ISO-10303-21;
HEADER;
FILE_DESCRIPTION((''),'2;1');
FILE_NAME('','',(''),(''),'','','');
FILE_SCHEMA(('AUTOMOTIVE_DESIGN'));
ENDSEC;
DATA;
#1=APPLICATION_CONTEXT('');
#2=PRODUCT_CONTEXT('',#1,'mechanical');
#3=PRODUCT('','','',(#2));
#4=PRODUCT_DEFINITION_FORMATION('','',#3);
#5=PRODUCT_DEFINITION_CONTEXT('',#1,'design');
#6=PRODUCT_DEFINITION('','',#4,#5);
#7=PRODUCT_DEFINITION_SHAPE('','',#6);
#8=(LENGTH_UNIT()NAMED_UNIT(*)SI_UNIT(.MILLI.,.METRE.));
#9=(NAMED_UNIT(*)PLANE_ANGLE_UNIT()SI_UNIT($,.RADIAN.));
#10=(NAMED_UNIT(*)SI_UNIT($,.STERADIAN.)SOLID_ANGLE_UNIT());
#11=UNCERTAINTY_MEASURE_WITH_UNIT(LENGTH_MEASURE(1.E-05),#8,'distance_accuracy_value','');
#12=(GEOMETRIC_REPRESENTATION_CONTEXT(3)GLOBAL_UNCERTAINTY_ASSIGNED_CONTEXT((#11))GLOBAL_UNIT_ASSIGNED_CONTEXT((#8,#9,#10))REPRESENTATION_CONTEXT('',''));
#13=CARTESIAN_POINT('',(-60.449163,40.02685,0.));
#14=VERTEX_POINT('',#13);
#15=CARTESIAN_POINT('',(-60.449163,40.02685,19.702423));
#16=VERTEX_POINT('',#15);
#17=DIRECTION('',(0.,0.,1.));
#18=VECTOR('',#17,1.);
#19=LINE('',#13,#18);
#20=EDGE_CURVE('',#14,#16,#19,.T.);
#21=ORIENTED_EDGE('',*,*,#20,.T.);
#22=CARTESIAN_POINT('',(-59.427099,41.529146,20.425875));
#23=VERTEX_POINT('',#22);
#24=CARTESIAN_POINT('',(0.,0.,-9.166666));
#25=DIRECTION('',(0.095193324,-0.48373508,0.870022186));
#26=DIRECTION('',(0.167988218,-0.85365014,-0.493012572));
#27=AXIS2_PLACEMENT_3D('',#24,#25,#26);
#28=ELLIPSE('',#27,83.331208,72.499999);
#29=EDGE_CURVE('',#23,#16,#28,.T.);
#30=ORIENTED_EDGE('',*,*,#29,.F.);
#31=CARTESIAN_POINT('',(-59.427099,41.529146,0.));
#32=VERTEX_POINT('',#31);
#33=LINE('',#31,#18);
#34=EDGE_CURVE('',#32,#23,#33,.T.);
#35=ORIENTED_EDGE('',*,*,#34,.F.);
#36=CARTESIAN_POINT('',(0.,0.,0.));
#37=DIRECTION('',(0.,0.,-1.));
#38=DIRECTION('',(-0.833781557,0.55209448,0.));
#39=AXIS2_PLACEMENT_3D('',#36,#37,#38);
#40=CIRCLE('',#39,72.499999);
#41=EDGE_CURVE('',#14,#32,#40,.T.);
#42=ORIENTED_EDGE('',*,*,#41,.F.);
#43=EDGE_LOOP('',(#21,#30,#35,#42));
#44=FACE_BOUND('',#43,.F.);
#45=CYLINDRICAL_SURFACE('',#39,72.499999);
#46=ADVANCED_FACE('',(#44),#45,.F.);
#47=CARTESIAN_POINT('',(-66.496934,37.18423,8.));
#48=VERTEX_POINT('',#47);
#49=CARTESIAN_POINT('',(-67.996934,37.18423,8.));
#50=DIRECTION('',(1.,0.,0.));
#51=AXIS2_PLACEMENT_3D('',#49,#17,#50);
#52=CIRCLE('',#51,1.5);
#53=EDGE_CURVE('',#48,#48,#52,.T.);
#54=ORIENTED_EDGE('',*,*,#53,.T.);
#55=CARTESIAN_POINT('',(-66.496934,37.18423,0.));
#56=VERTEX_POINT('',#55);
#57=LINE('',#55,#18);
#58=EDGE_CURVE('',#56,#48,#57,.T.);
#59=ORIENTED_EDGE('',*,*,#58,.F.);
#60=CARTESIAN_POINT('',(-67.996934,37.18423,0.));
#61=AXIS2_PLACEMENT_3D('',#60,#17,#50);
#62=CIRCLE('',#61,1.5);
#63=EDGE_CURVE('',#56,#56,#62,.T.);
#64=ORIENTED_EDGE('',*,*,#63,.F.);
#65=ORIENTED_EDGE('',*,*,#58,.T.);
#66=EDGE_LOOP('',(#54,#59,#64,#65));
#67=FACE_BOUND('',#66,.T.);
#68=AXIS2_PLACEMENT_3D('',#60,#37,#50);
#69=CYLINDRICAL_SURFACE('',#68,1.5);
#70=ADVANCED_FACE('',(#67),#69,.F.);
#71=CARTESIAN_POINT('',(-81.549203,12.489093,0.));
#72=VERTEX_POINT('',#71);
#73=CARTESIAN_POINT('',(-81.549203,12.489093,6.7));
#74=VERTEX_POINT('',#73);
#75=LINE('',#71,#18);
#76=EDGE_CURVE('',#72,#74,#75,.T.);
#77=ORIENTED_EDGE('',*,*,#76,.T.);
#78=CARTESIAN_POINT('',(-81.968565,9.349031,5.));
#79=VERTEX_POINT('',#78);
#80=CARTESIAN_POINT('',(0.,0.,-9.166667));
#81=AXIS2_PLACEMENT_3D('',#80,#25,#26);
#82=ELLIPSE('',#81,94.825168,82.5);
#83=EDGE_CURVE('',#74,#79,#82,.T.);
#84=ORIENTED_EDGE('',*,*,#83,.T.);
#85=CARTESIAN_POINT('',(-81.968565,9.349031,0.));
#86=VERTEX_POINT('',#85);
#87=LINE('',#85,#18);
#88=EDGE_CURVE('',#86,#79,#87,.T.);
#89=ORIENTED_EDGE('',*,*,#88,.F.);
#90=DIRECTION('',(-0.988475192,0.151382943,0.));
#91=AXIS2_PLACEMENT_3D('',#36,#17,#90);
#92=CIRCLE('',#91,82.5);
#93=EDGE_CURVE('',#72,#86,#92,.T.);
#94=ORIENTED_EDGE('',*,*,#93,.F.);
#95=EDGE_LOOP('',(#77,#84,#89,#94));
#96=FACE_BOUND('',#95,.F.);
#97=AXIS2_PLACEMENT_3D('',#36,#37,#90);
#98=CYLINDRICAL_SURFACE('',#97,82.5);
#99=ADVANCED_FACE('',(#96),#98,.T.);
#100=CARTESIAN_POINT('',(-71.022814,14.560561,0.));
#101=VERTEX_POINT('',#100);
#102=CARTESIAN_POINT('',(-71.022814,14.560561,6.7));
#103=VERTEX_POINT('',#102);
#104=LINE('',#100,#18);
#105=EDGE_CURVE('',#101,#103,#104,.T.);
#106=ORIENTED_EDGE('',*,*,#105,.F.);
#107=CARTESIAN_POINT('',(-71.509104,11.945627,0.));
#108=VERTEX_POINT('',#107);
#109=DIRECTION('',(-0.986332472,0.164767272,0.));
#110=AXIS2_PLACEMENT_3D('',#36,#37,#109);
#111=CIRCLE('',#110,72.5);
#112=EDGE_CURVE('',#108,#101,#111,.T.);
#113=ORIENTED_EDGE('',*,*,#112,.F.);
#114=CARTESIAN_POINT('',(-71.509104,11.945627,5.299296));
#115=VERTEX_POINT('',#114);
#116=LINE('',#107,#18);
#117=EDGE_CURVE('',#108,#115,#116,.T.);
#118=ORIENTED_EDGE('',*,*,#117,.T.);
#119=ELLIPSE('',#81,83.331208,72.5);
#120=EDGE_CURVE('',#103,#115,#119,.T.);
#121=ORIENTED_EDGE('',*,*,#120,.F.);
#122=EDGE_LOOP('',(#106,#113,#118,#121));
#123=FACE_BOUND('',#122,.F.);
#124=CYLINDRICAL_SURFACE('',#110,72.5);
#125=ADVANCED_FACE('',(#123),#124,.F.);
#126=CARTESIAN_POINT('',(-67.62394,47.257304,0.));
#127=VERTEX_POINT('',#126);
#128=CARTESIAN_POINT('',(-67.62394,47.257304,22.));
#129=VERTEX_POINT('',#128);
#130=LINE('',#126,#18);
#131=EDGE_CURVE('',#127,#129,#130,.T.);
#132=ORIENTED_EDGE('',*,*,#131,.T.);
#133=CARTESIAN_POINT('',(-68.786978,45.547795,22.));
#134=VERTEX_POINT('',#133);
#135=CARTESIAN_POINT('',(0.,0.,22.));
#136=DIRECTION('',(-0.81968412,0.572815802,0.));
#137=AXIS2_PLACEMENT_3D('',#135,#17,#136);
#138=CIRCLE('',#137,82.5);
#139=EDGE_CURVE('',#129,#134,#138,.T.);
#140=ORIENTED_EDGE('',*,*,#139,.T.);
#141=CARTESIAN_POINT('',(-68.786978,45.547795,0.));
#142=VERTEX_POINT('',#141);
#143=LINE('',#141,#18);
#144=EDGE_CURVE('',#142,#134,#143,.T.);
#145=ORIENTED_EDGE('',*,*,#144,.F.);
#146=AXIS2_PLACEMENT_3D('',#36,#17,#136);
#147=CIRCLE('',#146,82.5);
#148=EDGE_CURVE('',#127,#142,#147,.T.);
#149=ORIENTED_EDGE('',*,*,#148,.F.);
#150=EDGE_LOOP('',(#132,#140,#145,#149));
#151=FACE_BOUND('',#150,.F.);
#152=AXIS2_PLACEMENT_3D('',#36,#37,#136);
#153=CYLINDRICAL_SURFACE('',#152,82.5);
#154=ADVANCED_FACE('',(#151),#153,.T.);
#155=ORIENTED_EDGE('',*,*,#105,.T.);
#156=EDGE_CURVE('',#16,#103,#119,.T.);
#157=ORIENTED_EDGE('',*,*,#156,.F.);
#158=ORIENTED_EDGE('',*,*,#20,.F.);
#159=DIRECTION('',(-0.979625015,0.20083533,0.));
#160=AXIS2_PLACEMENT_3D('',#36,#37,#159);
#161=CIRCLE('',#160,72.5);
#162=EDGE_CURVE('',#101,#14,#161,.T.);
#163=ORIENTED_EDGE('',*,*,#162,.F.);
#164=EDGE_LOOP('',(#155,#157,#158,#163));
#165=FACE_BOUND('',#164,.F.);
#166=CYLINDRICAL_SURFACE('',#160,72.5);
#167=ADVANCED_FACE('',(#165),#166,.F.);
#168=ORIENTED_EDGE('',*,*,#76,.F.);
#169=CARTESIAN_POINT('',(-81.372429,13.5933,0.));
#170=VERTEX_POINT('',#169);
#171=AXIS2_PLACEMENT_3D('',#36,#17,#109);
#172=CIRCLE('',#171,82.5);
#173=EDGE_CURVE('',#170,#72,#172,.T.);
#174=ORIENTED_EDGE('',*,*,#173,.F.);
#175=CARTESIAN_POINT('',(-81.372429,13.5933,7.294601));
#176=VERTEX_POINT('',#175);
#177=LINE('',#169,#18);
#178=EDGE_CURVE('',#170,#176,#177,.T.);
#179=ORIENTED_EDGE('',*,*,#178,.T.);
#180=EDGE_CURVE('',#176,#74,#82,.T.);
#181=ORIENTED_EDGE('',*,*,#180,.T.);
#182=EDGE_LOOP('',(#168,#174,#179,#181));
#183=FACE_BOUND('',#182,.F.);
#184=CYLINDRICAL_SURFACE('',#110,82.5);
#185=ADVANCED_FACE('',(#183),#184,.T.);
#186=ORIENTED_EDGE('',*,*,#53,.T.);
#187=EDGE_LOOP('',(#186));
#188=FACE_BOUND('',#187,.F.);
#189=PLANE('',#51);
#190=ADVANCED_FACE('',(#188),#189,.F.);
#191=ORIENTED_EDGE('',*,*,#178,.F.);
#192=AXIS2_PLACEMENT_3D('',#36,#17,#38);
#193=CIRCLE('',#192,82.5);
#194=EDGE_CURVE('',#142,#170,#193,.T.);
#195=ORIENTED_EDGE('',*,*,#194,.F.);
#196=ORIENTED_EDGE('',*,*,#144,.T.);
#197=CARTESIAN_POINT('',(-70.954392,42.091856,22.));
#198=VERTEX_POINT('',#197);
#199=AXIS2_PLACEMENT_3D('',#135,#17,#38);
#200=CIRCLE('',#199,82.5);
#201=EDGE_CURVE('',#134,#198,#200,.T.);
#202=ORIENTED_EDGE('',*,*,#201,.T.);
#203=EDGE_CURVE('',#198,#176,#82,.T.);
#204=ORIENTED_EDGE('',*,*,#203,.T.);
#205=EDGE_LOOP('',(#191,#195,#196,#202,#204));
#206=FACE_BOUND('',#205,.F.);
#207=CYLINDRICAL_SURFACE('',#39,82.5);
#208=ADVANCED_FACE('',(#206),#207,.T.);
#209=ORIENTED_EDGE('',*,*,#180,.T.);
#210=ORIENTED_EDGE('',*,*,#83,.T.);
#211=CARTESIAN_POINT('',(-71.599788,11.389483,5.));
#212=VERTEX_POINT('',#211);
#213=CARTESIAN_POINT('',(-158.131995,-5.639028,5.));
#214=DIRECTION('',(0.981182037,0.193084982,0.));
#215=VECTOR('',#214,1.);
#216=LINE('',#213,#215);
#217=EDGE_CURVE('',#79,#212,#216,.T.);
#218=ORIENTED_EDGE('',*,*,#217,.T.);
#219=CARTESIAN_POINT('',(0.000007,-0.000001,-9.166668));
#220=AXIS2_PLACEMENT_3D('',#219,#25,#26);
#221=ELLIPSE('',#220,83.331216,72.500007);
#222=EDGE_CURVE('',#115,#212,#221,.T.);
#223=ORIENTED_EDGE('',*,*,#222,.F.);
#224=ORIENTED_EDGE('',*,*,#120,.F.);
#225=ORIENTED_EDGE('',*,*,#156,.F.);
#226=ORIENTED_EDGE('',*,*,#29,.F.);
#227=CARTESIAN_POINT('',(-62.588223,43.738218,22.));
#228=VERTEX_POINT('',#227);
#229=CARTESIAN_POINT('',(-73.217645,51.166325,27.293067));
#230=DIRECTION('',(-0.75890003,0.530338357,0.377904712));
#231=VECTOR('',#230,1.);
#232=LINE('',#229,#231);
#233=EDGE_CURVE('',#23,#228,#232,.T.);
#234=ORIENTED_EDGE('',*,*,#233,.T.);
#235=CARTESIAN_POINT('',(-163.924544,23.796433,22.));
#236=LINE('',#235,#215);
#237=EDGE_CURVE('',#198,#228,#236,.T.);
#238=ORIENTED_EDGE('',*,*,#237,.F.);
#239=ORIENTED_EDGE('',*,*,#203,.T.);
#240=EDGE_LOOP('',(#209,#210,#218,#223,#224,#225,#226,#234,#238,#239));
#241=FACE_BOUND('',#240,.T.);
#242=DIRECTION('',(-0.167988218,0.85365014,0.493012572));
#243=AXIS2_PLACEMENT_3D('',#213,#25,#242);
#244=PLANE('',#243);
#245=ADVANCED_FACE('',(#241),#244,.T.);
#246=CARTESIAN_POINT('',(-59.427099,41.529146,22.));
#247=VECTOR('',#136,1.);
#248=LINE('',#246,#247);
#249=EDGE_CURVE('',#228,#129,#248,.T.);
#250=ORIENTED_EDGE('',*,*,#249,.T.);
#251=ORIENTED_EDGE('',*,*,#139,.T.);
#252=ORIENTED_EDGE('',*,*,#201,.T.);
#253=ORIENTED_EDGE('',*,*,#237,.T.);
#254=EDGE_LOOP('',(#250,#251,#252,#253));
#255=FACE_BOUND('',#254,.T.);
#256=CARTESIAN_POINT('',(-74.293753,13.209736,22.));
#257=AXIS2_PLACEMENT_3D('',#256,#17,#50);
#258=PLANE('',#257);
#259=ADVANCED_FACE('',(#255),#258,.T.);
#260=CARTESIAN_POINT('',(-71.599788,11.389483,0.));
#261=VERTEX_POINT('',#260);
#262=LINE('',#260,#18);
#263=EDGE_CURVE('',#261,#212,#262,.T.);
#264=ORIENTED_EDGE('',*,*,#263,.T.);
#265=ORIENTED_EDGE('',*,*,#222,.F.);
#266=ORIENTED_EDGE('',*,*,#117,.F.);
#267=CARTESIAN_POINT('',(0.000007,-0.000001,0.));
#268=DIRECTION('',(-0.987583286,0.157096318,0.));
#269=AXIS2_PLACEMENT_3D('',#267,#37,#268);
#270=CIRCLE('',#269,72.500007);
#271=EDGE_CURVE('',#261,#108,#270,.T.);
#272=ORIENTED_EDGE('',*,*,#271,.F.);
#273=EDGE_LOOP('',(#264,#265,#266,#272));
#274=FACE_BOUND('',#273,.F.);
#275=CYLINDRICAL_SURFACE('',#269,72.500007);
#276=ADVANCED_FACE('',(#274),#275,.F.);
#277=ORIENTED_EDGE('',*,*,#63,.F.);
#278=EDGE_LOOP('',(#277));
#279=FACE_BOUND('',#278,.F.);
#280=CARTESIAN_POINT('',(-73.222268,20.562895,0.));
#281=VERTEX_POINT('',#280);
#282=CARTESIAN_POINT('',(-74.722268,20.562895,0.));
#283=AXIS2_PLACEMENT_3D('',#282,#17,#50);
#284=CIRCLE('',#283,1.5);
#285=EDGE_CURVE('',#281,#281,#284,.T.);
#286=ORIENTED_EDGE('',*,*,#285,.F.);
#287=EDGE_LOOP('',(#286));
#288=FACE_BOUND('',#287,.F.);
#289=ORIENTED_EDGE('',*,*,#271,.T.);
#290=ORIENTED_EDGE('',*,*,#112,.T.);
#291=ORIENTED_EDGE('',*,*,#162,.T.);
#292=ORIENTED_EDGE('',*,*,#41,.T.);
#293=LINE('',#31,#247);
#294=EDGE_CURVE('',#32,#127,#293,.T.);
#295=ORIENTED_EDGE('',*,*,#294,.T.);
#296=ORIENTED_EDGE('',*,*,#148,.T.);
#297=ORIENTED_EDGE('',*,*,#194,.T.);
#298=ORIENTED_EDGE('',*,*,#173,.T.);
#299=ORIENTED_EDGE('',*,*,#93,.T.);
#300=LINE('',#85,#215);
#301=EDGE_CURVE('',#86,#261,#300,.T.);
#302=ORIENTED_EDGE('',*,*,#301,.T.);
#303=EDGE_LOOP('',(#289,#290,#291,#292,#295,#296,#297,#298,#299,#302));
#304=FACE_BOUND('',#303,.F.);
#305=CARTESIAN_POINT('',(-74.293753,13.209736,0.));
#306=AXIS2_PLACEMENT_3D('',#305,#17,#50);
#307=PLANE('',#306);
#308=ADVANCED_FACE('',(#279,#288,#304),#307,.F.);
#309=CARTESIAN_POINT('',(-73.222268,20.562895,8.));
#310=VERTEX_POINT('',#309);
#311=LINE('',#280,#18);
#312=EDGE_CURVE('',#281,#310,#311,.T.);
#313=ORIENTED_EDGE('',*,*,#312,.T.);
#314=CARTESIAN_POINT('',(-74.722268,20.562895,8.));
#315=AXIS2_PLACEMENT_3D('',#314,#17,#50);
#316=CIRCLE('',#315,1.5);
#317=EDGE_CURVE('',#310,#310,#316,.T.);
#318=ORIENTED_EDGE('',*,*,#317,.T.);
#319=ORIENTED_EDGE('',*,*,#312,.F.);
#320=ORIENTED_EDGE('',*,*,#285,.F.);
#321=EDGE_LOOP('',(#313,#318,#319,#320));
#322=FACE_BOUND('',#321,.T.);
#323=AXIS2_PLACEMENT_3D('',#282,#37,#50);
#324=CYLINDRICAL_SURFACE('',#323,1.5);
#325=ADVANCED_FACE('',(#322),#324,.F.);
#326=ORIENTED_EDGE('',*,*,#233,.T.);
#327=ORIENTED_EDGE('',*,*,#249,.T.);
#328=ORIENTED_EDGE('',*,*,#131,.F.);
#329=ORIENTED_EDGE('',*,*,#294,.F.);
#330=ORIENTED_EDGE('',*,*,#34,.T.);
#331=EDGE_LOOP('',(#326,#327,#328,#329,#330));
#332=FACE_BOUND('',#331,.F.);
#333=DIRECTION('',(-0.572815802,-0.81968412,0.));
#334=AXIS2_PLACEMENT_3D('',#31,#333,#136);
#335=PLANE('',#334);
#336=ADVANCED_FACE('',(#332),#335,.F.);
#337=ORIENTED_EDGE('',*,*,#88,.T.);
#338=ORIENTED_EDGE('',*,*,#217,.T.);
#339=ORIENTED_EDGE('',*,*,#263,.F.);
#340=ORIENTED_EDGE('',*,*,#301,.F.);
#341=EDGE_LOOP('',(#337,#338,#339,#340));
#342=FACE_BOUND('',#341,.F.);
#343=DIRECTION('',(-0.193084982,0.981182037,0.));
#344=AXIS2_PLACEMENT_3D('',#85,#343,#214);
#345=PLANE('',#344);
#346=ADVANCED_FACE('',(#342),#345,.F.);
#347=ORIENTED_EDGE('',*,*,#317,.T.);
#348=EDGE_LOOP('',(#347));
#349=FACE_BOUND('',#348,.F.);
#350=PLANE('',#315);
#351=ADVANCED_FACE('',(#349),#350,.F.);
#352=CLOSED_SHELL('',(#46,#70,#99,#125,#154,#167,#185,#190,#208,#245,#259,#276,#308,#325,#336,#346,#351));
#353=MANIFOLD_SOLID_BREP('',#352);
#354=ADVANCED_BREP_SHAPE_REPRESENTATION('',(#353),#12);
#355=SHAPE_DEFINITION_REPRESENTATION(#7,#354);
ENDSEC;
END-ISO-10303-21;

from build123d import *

# Parameters (mm, degrees)
F0_R        = 1.5
F1_DEPTH    = 22
F2_T1_DEPTH = 165.8159550338
F3_DEPTH    = 8


# Not quite as in the source:
# - a fillet or chamfer that OpenCascade refuses, or shapes differently, is made with other operations: its cross-section is extruded or revolved along the edge and cut away or added


with BuildPart() as f1:
    # F0 (on Top) → F1 (new body)
    with BuildSketch(Plane.XY):
        with BuildLine():
            ThreePointArc((-71.5091042417, 11.9456272565), (-71.2779515077, 13.2553245479), (-71.0228136012, 14.5605613962))
            Line((-71.0228136012, 14.5605613962), (-78.4331581972, 13.1022935094))
            Line((-78.4331581972, 13.1022935094), (-71.5091042417, 11.9456272565))
        make_face()
        with BuildLine():
            ThreePointArc((-71.0228136012, 14.5605613962), (-66.9578457789, 27.8010231583), (-60.4491628751, 40.0268498348))
            Line((-60.4491628751, 40.0268498348), (-68.7869784441, 45.5477946397))
            ThreePointArc((-68.7869784441, 45.5477946397), (-76.7608906967, 30.2326918988), (-81.3724289647, 13.5932999815))
            Line((-81.3724289647, 13.5932999815), (-78.4331581972, 13.1022935094))
            Line((-78.4331581972, 13.1022935094), (-71.0228136012, 14.5605613962))
        make_face()
        with Locations((-74.7222680365, 20.5628952117)):
            Circle(F0_R, mode=Mode.SUBTRACT)
        with Locations((-67.9969340878, 37.184229919)):
            Circle(F0_R, mode=Mode.SUBTRACT)
        with BuildLine():
            ThreePointArc((-60.4491628751, 40.0268498348), (-59.9428373222, 40.7811997588), (-59.4270987125, 41.5291456523))
            Line((-59.4270987125, 41.5291456523), (-67.6239399142, 47.2573036734))
            ThreePointArc((-67.6239399142, 47.2573036734), (-68.2108148839, 46.4061928289), (-68.7869784441, 45.5477946397))
            Line((-68.7869784441, 45.5477946397), (-60.4491628751, 40.0268498348))
        make_face()
        with BuildLine():
            ThreePointArc((-71.5997882434, 11.3894830218), (-71.554986557, 11.667643242), (-71.5091042417, 11.9456272565))
            Line((-71.5091042417, 11.9456272565), (-78.4331581972, 13.1022935094))
            Line((-78.4331581972, 13.1022935094), (-81.5492033125, 12.4890928052))
            ThreePointArc((-81.5492033125, 12.4890928052), (-81.7739574871, 10.9210748966), (-81.9685648448, 9.3490308206))
            Line((-81.9685648448, 9.3490308206), (-71.5997882434, 11.3894830219))
        make_face()
        with BuildLine():
            Line((-81.5492033125, 12.4890928052), (-78.4331581972, 13.1022935094))
            Line((-78.4331581972, 13.1022935094), (-81.3724289647, 13.5932999815))
            ThreePointArc((-81.3724289647, 13.5932999815), (-81.462687068, 13.0414959135), (-81.5492033125, 12.4890928052))
        make_face()
        with Locations((-67.9969340878, 37.184229919)):
            Circle(F0_R)
        with Locations((-74.7222680365, 20.5628952117)):
            Circle(F0_R)
    extrude(amount=F1_DEPTH)

    # F2: chamfer of 17 x 30 on 1 edges, made by hand

    # F2_s2 → F2_t1 (cut)
    with BuildSketch(Plane(origin=(-153.3048702431, -30.1685793773, 0), x_dir=(0, 0, 1), z_dir=(0.9811820369, 0.1930849823, 0))):
        Polygon((5, -25), (22, -55), (22, -25), align=None)
    extrude(amount=F2_T1_DEPTH, mode=Mode.SUBTRACT)

    # F0 (on Top) → F3 (cut)
    with BuildSketch(Plane.XY):
        with Locations((-67.9969340878, 37.184229919)):
            Circle(F0_R)
        with Locations((-74.7222680365, 20.5628952117)):
            Circle(F0_R)
    extrude(amount=F3_DEPTH, mode=Mode.SUBTRACT)


solid = f1.part
